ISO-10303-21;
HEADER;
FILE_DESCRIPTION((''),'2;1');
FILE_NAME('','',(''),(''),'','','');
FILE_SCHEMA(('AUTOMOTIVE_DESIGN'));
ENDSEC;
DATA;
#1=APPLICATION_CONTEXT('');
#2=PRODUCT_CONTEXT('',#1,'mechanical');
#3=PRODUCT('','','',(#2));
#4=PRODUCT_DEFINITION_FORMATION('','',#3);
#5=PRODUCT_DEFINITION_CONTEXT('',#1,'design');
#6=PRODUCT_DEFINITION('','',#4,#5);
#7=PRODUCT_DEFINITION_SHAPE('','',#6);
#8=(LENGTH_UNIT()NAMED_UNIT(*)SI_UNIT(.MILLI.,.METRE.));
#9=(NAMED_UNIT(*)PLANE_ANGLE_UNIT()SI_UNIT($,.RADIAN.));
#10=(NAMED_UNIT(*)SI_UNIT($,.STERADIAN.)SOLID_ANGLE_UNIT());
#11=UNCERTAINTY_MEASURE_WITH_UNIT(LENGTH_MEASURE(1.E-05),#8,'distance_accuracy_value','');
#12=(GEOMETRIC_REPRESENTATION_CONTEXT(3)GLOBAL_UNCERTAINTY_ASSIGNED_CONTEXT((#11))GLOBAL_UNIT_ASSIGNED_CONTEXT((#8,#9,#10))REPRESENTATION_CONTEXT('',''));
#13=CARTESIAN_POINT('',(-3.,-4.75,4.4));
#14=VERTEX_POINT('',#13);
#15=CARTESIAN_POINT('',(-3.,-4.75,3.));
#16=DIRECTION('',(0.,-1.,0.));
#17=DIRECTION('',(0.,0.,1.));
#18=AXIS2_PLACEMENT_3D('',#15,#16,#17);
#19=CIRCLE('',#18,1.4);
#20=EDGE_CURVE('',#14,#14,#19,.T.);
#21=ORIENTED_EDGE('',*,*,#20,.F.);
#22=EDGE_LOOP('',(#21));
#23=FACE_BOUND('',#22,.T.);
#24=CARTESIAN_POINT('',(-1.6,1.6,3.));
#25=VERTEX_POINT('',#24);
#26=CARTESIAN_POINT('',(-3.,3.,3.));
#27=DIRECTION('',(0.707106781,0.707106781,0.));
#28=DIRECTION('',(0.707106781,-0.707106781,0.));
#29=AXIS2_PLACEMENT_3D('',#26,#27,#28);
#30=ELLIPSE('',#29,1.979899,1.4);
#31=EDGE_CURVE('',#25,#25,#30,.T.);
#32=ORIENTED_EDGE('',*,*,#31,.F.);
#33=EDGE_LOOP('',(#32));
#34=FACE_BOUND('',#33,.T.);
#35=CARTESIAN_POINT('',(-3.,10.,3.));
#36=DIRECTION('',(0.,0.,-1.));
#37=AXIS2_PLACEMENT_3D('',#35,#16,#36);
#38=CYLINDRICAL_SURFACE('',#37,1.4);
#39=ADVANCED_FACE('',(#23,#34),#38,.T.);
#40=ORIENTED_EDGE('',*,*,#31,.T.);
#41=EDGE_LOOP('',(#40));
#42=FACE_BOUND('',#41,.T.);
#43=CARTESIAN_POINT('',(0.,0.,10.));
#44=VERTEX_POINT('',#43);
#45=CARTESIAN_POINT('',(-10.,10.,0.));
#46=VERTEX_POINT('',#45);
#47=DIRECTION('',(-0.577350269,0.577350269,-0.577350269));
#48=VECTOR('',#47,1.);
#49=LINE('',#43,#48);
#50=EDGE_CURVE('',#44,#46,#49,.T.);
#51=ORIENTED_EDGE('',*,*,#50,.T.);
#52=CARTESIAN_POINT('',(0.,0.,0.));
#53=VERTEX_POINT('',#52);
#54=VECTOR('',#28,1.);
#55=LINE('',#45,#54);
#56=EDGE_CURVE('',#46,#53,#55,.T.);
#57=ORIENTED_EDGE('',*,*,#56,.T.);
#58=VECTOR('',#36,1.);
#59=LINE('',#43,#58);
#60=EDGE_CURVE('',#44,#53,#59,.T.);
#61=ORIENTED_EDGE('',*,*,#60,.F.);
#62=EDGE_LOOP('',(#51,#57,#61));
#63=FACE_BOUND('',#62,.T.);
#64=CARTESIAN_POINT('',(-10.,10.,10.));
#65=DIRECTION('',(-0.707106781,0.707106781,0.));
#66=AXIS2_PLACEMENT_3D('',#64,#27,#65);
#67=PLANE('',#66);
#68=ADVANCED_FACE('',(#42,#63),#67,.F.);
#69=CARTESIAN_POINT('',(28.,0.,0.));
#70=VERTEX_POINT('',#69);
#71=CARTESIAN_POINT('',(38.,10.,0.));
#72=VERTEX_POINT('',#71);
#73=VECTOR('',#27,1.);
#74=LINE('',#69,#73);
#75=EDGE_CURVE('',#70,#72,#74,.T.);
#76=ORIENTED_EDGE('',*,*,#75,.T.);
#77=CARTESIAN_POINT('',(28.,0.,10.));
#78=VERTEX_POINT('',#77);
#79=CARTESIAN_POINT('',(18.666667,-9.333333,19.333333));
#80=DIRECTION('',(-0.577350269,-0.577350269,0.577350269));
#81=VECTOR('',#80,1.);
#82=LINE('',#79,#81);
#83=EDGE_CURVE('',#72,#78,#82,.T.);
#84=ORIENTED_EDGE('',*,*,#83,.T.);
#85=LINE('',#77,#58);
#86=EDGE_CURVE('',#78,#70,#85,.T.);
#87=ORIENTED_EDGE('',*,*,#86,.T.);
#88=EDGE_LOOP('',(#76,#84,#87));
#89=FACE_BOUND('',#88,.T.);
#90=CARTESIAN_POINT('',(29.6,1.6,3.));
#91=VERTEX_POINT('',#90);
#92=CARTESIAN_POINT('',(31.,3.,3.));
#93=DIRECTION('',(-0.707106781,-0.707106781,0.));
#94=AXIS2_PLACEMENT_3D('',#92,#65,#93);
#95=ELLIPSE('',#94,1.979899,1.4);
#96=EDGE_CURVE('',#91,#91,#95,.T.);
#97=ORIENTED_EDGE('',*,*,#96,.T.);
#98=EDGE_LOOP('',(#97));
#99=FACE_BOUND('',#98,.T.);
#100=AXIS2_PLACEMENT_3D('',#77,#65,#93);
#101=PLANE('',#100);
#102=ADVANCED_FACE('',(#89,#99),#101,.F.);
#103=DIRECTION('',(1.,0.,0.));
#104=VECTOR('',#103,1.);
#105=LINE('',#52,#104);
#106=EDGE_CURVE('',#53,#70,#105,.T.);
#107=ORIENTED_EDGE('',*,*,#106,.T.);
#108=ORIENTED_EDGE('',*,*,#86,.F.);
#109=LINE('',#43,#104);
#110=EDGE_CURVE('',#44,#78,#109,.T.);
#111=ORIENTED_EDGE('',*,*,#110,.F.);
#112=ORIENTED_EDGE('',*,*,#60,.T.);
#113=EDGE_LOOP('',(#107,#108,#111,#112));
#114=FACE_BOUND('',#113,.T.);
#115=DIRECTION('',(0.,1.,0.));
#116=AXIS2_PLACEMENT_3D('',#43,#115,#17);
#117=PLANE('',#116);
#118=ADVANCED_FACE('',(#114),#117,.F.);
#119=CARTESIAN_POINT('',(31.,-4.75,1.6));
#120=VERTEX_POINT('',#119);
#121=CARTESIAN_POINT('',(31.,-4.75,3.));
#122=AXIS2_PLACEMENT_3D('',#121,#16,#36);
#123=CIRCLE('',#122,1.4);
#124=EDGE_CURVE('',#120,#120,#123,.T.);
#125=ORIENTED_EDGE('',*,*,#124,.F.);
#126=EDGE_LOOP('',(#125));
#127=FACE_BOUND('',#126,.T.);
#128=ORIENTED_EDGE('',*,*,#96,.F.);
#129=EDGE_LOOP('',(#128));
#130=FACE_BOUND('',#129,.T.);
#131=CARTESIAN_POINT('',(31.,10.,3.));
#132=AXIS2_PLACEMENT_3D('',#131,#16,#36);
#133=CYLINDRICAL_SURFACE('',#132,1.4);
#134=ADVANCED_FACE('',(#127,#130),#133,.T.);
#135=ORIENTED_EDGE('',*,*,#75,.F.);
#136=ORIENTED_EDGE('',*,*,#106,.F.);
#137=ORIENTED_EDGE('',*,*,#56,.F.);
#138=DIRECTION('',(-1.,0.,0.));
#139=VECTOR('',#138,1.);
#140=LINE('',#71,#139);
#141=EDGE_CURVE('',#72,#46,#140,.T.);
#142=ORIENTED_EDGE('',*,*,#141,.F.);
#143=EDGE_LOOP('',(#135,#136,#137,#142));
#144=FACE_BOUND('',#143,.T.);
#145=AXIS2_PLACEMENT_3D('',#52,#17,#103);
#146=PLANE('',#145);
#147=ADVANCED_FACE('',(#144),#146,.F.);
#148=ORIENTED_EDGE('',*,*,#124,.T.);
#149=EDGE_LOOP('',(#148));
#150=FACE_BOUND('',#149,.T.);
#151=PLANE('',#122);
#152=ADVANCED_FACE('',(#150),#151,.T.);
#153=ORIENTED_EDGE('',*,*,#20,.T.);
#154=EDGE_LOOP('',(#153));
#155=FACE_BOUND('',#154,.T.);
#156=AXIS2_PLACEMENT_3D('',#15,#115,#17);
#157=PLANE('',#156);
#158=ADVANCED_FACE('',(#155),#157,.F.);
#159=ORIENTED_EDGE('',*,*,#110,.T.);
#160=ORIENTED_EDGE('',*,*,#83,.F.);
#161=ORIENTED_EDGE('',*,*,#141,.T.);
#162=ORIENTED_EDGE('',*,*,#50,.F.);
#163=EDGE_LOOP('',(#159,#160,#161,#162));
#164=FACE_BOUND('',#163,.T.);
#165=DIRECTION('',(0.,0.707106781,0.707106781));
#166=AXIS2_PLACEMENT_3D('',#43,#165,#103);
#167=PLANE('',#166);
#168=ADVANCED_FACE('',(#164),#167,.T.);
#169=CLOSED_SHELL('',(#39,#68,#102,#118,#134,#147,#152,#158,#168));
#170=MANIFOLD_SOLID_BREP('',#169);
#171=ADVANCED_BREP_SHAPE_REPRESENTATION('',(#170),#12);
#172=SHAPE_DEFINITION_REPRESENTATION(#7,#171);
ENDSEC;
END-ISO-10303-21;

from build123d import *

# Parameters (mm, degrees)
BOSS_EXTRUDE1_DEPTH = 10
CHAMFER1_SIZE       = 10
BOSS_EXTRUDE2_START = -10
SKETCH2_R           = 1.4
BOSS_EXTRUDE2_DEPTH = 14.75
CUT_EXTRUDE1_DEPTH  = 5


with BuildPart() as part:
    # Sketch1 → Boss-Extrude1 (new body)
    with BuildSketch(Plane.XY):
        Polygon((0, 0), (28, 0), (38, 10), (-10, 10), align=None)
    extrude(amount=BOSS_EXTRUDE1_DEPTH)

    # Chamfer1
    chamfer1_edges = [part.edges().sort_by_distance(p)[0] for p in [
        (14, 10, 10),
    ]]
    chamfer(chamfer1_edges, length=CHAMFER1_SIZE - 0.0001)  # a hair under: the kernel refuses the full size

    # Sketch2 → Boss-Extrude2 (add)
    with BuildSketch(Plane.XZ.offset(BOSS_EXTRUDE2_START)):
        with Locations(Location((31, 3, 0), (0, 0, 270))):
            Circle(SKETCH2_R)
        with Locations(Location((-3, 3, 0), (0, 0, 90))):
            Circle(SKETCH2_R)
    extrude(amount=BOSS_EXTRUDE2_DEPTH)

    # Sketch4 → Cut-Extrude1 (cut)
    with BuildSketch(Plane(origin=(0, 5, 5), x_dir=(1, 0, 0), z_dir=(0, 0.7071067811865487, 0.7071067811865465))):
        Polygon((-10, 7.071067812), (0, -7.071067812), (28, -7.071067812), (38, 7.071067812), align=None)
    extrude(amount=CUT_EXTRUDE1_DEPTH, mode=Mode.SUBTRACT)


solid = part.part
